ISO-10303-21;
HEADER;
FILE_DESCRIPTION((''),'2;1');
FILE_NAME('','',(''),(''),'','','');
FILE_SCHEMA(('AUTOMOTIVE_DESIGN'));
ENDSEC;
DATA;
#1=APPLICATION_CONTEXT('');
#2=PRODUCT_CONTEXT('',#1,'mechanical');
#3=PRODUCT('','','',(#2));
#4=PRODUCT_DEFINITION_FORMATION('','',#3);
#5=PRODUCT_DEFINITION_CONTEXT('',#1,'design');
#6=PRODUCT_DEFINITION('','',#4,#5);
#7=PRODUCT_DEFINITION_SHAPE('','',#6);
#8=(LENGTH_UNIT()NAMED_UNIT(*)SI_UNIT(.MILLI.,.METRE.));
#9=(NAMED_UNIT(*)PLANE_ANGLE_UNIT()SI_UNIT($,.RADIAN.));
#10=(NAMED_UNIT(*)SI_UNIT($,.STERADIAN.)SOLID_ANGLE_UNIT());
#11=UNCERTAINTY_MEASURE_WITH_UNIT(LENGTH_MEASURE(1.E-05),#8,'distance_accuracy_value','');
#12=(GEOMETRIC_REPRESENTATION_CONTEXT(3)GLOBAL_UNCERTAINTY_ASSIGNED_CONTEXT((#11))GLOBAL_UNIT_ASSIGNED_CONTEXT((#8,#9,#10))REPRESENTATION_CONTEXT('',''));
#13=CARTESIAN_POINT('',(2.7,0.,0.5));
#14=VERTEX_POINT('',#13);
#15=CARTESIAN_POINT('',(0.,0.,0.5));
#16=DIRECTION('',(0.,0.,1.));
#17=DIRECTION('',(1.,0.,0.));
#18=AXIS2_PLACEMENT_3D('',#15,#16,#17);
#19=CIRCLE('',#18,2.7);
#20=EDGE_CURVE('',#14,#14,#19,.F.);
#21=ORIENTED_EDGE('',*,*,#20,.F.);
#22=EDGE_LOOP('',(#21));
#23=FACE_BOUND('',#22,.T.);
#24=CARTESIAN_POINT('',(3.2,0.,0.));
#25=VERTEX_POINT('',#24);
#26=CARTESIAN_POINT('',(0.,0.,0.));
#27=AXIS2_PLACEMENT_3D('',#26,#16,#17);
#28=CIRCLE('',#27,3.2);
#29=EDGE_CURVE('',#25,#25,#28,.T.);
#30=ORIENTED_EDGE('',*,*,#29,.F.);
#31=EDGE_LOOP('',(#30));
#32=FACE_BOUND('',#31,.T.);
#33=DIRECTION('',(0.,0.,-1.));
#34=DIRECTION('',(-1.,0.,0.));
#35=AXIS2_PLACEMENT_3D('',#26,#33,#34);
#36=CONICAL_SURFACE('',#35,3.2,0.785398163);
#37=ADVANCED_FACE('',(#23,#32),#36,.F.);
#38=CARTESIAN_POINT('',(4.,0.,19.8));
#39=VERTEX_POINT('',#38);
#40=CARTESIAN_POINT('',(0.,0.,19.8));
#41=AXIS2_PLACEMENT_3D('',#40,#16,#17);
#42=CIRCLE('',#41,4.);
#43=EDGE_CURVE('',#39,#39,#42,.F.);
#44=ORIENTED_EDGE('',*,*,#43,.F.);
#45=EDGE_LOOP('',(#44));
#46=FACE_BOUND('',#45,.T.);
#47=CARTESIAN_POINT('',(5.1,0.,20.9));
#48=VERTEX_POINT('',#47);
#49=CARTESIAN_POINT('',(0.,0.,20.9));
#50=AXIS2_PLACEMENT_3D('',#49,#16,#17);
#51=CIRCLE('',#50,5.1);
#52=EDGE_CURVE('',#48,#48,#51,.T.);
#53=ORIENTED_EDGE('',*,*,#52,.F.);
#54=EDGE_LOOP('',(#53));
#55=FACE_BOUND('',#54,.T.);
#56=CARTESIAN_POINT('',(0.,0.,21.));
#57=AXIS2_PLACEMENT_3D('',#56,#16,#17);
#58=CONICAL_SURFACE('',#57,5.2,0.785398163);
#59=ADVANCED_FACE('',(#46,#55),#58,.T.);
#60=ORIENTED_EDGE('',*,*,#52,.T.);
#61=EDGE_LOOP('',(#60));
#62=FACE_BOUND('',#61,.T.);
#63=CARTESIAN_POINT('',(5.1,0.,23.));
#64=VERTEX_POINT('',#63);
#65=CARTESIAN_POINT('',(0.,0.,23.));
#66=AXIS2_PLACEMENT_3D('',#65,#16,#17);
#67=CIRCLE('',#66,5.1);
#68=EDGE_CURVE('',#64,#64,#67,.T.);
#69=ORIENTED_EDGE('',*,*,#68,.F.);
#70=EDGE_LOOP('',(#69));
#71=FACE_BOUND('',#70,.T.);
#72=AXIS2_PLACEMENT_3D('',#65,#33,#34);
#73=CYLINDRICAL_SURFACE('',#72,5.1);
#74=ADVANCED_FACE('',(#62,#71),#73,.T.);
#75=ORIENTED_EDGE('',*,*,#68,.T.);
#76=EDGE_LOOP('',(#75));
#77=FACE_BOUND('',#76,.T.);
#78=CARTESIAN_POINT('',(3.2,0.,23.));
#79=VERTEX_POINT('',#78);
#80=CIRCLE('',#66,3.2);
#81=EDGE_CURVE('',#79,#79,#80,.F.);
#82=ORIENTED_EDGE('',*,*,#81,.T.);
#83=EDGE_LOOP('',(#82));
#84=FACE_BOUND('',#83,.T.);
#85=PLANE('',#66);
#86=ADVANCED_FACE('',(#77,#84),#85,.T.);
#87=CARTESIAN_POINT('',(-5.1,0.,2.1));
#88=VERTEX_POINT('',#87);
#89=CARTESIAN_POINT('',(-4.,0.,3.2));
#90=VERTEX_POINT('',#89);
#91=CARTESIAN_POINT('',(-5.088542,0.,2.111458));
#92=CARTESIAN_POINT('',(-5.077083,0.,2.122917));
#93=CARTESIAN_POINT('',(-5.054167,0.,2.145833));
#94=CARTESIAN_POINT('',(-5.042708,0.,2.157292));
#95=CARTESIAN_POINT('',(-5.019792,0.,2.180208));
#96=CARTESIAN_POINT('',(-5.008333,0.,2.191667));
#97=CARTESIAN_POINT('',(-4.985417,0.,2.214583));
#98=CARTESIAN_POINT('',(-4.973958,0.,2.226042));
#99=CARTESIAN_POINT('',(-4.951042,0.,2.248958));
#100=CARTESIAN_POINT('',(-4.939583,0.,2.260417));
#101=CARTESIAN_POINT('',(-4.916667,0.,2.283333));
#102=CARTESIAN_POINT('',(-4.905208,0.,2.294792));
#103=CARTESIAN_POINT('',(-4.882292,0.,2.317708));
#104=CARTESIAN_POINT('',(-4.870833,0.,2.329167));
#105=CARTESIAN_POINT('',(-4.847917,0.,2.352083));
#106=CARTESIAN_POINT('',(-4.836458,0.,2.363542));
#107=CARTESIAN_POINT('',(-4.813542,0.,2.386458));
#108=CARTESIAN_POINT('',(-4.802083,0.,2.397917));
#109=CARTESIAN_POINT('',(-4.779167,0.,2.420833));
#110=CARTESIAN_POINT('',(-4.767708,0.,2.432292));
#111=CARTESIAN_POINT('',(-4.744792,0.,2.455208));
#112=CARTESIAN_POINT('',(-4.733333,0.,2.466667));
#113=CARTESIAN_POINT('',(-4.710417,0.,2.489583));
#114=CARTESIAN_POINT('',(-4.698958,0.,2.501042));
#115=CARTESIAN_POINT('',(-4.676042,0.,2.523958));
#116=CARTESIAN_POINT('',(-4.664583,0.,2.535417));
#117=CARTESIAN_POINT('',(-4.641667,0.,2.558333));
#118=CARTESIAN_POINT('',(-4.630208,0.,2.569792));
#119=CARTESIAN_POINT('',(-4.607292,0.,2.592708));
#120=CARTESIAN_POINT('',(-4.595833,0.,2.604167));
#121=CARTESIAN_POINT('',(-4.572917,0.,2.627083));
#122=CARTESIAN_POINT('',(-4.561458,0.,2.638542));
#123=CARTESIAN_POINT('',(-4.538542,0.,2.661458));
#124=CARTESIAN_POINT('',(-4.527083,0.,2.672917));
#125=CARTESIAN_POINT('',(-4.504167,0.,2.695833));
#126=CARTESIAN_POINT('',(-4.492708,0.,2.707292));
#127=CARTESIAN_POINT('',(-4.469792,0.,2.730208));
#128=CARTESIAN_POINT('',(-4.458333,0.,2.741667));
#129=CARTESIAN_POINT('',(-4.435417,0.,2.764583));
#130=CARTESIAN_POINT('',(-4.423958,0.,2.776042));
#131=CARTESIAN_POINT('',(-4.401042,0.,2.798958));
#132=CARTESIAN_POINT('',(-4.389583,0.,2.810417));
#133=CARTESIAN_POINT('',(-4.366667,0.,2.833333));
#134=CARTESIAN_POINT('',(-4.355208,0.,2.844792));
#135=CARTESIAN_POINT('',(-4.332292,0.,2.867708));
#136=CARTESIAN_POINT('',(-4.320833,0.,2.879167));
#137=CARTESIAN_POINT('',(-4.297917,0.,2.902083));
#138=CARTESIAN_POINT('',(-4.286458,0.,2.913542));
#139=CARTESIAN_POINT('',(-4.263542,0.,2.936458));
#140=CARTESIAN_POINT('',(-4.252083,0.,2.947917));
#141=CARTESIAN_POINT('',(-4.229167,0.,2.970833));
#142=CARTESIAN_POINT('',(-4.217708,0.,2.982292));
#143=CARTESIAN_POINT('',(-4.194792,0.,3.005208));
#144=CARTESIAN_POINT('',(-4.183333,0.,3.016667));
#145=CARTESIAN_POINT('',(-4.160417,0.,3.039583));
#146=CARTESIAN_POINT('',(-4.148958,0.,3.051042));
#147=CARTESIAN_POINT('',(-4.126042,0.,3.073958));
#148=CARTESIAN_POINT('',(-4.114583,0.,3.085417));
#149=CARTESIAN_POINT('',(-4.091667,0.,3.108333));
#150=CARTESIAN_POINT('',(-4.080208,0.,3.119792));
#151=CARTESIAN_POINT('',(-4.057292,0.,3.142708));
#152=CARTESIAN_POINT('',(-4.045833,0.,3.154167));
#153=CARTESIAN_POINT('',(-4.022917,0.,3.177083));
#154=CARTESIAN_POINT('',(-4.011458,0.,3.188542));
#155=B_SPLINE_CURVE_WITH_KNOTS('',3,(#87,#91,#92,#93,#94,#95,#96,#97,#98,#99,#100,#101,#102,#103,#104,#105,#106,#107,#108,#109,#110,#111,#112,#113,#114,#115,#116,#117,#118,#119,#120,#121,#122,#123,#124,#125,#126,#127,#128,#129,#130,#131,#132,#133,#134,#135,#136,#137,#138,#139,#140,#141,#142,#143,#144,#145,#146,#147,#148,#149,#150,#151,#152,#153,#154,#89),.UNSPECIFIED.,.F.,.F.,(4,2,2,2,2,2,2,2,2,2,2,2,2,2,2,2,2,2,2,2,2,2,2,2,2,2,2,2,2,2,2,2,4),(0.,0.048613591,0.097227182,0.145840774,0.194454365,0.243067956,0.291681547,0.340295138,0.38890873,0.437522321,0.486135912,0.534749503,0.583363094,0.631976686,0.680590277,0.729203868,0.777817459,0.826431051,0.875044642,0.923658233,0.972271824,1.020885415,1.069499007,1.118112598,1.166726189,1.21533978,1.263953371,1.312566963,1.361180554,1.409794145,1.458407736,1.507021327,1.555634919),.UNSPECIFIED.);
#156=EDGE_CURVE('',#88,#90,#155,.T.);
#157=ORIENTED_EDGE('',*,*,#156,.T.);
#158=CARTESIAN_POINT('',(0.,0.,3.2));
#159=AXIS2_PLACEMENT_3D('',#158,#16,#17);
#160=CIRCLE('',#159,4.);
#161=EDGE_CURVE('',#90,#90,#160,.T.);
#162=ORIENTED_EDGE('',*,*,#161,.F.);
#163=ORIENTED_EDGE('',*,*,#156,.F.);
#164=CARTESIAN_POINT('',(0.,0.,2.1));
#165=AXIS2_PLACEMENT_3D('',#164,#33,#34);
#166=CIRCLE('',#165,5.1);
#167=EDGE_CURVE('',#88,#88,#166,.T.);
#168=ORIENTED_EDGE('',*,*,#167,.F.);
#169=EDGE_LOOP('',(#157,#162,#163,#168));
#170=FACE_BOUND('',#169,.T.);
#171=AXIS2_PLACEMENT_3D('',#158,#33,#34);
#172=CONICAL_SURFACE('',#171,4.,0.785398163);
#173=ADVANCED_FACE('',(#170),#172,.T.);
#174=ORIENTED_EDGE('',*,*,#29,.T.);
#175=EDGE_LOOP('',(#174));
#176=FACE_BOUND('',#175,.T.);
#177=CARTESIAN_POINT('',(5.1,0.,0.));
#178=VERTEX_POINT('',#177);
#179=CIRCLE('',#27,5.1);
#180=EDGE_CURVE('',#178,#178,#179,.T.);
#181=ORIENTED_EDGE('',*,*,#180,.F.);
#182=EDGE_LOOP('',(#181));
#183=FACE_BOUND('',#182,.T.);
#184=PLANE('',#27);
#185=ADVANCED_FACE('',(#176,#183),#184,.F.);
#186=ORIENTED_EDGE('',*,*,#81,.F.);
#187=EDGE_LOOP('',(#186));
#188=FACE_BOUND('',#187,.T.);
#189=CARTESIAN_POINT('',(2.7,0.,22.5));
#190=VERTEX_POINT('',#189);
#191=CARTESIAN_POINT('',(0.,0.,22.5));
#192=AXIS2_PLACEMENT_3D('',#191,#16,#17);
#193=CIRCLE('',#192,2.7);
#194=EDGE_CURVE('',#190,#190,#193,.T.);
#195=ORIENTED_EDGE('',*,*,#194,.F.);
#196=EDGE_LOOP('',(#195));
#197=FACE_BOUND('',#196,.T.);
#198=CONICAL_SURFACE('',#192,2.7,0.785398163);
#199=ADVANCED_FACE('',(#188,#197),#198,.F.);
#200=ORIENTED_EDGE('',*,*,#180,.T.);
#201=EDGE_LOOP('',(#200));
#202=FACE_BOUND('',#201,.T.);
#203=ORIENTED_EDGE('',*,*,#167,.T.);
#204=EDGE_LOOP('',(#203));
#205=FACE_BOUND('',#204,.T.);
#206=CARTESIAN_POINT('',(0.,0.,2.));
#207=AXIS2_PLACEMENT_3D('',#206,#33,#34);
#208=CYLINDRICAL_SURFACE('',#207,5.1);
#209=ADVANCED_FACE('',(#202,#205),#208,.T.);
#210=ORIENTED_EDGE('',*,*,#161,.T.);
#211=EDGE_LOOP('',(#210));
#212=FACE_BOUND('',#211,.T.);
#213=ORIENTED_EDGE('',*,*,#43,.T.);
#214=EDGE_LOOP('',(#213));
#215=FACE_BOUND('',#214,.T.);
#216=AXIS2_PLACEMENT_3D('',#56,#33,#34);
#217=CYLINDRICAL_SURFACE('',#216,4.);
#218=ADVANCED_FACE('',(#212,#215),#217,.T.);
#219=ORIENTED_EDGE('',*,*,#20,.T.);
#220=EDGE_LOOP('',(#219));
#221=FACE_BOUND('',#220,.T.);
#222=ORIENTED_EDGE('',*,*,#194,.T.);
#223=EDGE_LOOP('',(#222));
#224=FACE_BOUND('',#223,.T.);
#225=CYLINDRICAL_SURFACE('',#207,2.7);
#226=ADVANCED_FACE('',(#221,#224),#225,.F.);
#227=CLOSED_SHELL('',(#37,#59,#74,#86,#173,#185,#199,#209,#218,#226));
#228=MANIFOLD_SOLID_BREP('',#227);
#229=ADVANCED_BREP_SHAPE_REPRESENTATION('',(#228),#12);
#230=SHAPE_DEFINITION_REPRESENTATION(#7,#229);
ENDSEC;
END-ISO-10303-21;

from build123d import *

# Parameters (mm, degrees)
SKETCH2_R           = 5.1
SKETCH2_R_2         = 2.7
BOSS_EXTRUDE1_DEPTH = 2
SKETCH3_R           = 4
SKETCH3_R_2         = 2.7
BOSS_EXTRUDE2_DEPTH = 19
SKETCH4_R           = 5.1
SKETCH4_R_2         = 2.7
BOSS_EXTRUDE3_DEPTH = 2
CHAMFER1_SIZE       = 1.2
CHAMFER2_SIZE       = 0.5


with BuildPart() as part:
    # Sketch2 → Boss-Extrude1 (new body)
    with BuildSketch(Plane.XY):
        Circle(SKETCH2_R)
        Circle(SKETCH2_R_2, mode=Mode.SUBTRACT)
    extrude(amount=BOSS_EXTRUDE1_DEPTH)

    # Sketch3 → Boss-Extrude2 (add)
    with BuildSketch(Plane.XY.offset(2)):
        Circle(SKETCH3_R)
        Circle(SKETCH3_R_2, mode=Mode.SUBTRACT)
    extrude(amount=BOSS_EXTRUDE2_DEPTH)

    # Sketch4 → Boss-Extrude3 (add)
    with BuildSketch(Plane.XY.offset(21)):
        Circle(SKETCH4_R)
        Circle(SKETCH4_R_2, mode=Mode.SUBTRACT)
    extrude(amount=BOSS_EXTRUDE3_DEPTH)

    # Chamfer1
    # the kernel refuses this chamfer: 1.2 mm, written as the material it adds along each edge
    with BuildSketch(Plane(origin=(0, 0, 21), x_dir=(1, 0, 0), z_dir=(0, -1, 0))) as chamfer1_piece_1_section:
        Polygon((4, -CHAMFER1_SIZE), (4 + CHAMFER1_SIZE, 0), (4, 0), align=None)
    chamfer1_piece_1 = revolve(axis=Axis((0, 0, 21), (0, 0, 1)), mode=Mode.PRIVATE)
    chamfer1_piece_1 = chamfer1_piece_1 & Plane(origin=(0, 0, 20.352695211), x_dir=(1, 0, 0), z_dir=(0, 0, -1)) * Cylinder(5.1, 21, mode=Mode.PRIVATE)
    add(chamfer1_piece_1)
    with BuildSketch(Plane(origin=(0, 0, 2), x_dir=(1, 0, 0), z_dir=(0, -1, 0))) as chamfer1_piece_2_section:
        Polygon((4 + CHAMFER1_SIZE, 0), (4, CHAMFER1_SIZE), (4, 0), align=None)
    chamfer1_piece_2 = revolve(axis=Axis((0, 0, 2), (0, 0, 1)), mode=Mode.PRIVATE)
    chamfer1_piece_2 = chamfer1_piece_2 & Plane(origin=(0, 0, 2.647304789), x_dir=(1, 0, 0), z_dir=(0, 0, -1)) * Cylinder(5.1, 21, mode=Mode.PRIVATE)
    add(chamfer1_piece_2)

    # Chamfer2
    chamfer2_edges = [part.edges().sort_by_distance(p)[0] for p in [
        (-2.7, 0, 23),
        (-2.7, 0, 0),
    ]]
    chamfer(chamfer2_edges, length=CHAMFER2_SIZE)


solid = part.part
